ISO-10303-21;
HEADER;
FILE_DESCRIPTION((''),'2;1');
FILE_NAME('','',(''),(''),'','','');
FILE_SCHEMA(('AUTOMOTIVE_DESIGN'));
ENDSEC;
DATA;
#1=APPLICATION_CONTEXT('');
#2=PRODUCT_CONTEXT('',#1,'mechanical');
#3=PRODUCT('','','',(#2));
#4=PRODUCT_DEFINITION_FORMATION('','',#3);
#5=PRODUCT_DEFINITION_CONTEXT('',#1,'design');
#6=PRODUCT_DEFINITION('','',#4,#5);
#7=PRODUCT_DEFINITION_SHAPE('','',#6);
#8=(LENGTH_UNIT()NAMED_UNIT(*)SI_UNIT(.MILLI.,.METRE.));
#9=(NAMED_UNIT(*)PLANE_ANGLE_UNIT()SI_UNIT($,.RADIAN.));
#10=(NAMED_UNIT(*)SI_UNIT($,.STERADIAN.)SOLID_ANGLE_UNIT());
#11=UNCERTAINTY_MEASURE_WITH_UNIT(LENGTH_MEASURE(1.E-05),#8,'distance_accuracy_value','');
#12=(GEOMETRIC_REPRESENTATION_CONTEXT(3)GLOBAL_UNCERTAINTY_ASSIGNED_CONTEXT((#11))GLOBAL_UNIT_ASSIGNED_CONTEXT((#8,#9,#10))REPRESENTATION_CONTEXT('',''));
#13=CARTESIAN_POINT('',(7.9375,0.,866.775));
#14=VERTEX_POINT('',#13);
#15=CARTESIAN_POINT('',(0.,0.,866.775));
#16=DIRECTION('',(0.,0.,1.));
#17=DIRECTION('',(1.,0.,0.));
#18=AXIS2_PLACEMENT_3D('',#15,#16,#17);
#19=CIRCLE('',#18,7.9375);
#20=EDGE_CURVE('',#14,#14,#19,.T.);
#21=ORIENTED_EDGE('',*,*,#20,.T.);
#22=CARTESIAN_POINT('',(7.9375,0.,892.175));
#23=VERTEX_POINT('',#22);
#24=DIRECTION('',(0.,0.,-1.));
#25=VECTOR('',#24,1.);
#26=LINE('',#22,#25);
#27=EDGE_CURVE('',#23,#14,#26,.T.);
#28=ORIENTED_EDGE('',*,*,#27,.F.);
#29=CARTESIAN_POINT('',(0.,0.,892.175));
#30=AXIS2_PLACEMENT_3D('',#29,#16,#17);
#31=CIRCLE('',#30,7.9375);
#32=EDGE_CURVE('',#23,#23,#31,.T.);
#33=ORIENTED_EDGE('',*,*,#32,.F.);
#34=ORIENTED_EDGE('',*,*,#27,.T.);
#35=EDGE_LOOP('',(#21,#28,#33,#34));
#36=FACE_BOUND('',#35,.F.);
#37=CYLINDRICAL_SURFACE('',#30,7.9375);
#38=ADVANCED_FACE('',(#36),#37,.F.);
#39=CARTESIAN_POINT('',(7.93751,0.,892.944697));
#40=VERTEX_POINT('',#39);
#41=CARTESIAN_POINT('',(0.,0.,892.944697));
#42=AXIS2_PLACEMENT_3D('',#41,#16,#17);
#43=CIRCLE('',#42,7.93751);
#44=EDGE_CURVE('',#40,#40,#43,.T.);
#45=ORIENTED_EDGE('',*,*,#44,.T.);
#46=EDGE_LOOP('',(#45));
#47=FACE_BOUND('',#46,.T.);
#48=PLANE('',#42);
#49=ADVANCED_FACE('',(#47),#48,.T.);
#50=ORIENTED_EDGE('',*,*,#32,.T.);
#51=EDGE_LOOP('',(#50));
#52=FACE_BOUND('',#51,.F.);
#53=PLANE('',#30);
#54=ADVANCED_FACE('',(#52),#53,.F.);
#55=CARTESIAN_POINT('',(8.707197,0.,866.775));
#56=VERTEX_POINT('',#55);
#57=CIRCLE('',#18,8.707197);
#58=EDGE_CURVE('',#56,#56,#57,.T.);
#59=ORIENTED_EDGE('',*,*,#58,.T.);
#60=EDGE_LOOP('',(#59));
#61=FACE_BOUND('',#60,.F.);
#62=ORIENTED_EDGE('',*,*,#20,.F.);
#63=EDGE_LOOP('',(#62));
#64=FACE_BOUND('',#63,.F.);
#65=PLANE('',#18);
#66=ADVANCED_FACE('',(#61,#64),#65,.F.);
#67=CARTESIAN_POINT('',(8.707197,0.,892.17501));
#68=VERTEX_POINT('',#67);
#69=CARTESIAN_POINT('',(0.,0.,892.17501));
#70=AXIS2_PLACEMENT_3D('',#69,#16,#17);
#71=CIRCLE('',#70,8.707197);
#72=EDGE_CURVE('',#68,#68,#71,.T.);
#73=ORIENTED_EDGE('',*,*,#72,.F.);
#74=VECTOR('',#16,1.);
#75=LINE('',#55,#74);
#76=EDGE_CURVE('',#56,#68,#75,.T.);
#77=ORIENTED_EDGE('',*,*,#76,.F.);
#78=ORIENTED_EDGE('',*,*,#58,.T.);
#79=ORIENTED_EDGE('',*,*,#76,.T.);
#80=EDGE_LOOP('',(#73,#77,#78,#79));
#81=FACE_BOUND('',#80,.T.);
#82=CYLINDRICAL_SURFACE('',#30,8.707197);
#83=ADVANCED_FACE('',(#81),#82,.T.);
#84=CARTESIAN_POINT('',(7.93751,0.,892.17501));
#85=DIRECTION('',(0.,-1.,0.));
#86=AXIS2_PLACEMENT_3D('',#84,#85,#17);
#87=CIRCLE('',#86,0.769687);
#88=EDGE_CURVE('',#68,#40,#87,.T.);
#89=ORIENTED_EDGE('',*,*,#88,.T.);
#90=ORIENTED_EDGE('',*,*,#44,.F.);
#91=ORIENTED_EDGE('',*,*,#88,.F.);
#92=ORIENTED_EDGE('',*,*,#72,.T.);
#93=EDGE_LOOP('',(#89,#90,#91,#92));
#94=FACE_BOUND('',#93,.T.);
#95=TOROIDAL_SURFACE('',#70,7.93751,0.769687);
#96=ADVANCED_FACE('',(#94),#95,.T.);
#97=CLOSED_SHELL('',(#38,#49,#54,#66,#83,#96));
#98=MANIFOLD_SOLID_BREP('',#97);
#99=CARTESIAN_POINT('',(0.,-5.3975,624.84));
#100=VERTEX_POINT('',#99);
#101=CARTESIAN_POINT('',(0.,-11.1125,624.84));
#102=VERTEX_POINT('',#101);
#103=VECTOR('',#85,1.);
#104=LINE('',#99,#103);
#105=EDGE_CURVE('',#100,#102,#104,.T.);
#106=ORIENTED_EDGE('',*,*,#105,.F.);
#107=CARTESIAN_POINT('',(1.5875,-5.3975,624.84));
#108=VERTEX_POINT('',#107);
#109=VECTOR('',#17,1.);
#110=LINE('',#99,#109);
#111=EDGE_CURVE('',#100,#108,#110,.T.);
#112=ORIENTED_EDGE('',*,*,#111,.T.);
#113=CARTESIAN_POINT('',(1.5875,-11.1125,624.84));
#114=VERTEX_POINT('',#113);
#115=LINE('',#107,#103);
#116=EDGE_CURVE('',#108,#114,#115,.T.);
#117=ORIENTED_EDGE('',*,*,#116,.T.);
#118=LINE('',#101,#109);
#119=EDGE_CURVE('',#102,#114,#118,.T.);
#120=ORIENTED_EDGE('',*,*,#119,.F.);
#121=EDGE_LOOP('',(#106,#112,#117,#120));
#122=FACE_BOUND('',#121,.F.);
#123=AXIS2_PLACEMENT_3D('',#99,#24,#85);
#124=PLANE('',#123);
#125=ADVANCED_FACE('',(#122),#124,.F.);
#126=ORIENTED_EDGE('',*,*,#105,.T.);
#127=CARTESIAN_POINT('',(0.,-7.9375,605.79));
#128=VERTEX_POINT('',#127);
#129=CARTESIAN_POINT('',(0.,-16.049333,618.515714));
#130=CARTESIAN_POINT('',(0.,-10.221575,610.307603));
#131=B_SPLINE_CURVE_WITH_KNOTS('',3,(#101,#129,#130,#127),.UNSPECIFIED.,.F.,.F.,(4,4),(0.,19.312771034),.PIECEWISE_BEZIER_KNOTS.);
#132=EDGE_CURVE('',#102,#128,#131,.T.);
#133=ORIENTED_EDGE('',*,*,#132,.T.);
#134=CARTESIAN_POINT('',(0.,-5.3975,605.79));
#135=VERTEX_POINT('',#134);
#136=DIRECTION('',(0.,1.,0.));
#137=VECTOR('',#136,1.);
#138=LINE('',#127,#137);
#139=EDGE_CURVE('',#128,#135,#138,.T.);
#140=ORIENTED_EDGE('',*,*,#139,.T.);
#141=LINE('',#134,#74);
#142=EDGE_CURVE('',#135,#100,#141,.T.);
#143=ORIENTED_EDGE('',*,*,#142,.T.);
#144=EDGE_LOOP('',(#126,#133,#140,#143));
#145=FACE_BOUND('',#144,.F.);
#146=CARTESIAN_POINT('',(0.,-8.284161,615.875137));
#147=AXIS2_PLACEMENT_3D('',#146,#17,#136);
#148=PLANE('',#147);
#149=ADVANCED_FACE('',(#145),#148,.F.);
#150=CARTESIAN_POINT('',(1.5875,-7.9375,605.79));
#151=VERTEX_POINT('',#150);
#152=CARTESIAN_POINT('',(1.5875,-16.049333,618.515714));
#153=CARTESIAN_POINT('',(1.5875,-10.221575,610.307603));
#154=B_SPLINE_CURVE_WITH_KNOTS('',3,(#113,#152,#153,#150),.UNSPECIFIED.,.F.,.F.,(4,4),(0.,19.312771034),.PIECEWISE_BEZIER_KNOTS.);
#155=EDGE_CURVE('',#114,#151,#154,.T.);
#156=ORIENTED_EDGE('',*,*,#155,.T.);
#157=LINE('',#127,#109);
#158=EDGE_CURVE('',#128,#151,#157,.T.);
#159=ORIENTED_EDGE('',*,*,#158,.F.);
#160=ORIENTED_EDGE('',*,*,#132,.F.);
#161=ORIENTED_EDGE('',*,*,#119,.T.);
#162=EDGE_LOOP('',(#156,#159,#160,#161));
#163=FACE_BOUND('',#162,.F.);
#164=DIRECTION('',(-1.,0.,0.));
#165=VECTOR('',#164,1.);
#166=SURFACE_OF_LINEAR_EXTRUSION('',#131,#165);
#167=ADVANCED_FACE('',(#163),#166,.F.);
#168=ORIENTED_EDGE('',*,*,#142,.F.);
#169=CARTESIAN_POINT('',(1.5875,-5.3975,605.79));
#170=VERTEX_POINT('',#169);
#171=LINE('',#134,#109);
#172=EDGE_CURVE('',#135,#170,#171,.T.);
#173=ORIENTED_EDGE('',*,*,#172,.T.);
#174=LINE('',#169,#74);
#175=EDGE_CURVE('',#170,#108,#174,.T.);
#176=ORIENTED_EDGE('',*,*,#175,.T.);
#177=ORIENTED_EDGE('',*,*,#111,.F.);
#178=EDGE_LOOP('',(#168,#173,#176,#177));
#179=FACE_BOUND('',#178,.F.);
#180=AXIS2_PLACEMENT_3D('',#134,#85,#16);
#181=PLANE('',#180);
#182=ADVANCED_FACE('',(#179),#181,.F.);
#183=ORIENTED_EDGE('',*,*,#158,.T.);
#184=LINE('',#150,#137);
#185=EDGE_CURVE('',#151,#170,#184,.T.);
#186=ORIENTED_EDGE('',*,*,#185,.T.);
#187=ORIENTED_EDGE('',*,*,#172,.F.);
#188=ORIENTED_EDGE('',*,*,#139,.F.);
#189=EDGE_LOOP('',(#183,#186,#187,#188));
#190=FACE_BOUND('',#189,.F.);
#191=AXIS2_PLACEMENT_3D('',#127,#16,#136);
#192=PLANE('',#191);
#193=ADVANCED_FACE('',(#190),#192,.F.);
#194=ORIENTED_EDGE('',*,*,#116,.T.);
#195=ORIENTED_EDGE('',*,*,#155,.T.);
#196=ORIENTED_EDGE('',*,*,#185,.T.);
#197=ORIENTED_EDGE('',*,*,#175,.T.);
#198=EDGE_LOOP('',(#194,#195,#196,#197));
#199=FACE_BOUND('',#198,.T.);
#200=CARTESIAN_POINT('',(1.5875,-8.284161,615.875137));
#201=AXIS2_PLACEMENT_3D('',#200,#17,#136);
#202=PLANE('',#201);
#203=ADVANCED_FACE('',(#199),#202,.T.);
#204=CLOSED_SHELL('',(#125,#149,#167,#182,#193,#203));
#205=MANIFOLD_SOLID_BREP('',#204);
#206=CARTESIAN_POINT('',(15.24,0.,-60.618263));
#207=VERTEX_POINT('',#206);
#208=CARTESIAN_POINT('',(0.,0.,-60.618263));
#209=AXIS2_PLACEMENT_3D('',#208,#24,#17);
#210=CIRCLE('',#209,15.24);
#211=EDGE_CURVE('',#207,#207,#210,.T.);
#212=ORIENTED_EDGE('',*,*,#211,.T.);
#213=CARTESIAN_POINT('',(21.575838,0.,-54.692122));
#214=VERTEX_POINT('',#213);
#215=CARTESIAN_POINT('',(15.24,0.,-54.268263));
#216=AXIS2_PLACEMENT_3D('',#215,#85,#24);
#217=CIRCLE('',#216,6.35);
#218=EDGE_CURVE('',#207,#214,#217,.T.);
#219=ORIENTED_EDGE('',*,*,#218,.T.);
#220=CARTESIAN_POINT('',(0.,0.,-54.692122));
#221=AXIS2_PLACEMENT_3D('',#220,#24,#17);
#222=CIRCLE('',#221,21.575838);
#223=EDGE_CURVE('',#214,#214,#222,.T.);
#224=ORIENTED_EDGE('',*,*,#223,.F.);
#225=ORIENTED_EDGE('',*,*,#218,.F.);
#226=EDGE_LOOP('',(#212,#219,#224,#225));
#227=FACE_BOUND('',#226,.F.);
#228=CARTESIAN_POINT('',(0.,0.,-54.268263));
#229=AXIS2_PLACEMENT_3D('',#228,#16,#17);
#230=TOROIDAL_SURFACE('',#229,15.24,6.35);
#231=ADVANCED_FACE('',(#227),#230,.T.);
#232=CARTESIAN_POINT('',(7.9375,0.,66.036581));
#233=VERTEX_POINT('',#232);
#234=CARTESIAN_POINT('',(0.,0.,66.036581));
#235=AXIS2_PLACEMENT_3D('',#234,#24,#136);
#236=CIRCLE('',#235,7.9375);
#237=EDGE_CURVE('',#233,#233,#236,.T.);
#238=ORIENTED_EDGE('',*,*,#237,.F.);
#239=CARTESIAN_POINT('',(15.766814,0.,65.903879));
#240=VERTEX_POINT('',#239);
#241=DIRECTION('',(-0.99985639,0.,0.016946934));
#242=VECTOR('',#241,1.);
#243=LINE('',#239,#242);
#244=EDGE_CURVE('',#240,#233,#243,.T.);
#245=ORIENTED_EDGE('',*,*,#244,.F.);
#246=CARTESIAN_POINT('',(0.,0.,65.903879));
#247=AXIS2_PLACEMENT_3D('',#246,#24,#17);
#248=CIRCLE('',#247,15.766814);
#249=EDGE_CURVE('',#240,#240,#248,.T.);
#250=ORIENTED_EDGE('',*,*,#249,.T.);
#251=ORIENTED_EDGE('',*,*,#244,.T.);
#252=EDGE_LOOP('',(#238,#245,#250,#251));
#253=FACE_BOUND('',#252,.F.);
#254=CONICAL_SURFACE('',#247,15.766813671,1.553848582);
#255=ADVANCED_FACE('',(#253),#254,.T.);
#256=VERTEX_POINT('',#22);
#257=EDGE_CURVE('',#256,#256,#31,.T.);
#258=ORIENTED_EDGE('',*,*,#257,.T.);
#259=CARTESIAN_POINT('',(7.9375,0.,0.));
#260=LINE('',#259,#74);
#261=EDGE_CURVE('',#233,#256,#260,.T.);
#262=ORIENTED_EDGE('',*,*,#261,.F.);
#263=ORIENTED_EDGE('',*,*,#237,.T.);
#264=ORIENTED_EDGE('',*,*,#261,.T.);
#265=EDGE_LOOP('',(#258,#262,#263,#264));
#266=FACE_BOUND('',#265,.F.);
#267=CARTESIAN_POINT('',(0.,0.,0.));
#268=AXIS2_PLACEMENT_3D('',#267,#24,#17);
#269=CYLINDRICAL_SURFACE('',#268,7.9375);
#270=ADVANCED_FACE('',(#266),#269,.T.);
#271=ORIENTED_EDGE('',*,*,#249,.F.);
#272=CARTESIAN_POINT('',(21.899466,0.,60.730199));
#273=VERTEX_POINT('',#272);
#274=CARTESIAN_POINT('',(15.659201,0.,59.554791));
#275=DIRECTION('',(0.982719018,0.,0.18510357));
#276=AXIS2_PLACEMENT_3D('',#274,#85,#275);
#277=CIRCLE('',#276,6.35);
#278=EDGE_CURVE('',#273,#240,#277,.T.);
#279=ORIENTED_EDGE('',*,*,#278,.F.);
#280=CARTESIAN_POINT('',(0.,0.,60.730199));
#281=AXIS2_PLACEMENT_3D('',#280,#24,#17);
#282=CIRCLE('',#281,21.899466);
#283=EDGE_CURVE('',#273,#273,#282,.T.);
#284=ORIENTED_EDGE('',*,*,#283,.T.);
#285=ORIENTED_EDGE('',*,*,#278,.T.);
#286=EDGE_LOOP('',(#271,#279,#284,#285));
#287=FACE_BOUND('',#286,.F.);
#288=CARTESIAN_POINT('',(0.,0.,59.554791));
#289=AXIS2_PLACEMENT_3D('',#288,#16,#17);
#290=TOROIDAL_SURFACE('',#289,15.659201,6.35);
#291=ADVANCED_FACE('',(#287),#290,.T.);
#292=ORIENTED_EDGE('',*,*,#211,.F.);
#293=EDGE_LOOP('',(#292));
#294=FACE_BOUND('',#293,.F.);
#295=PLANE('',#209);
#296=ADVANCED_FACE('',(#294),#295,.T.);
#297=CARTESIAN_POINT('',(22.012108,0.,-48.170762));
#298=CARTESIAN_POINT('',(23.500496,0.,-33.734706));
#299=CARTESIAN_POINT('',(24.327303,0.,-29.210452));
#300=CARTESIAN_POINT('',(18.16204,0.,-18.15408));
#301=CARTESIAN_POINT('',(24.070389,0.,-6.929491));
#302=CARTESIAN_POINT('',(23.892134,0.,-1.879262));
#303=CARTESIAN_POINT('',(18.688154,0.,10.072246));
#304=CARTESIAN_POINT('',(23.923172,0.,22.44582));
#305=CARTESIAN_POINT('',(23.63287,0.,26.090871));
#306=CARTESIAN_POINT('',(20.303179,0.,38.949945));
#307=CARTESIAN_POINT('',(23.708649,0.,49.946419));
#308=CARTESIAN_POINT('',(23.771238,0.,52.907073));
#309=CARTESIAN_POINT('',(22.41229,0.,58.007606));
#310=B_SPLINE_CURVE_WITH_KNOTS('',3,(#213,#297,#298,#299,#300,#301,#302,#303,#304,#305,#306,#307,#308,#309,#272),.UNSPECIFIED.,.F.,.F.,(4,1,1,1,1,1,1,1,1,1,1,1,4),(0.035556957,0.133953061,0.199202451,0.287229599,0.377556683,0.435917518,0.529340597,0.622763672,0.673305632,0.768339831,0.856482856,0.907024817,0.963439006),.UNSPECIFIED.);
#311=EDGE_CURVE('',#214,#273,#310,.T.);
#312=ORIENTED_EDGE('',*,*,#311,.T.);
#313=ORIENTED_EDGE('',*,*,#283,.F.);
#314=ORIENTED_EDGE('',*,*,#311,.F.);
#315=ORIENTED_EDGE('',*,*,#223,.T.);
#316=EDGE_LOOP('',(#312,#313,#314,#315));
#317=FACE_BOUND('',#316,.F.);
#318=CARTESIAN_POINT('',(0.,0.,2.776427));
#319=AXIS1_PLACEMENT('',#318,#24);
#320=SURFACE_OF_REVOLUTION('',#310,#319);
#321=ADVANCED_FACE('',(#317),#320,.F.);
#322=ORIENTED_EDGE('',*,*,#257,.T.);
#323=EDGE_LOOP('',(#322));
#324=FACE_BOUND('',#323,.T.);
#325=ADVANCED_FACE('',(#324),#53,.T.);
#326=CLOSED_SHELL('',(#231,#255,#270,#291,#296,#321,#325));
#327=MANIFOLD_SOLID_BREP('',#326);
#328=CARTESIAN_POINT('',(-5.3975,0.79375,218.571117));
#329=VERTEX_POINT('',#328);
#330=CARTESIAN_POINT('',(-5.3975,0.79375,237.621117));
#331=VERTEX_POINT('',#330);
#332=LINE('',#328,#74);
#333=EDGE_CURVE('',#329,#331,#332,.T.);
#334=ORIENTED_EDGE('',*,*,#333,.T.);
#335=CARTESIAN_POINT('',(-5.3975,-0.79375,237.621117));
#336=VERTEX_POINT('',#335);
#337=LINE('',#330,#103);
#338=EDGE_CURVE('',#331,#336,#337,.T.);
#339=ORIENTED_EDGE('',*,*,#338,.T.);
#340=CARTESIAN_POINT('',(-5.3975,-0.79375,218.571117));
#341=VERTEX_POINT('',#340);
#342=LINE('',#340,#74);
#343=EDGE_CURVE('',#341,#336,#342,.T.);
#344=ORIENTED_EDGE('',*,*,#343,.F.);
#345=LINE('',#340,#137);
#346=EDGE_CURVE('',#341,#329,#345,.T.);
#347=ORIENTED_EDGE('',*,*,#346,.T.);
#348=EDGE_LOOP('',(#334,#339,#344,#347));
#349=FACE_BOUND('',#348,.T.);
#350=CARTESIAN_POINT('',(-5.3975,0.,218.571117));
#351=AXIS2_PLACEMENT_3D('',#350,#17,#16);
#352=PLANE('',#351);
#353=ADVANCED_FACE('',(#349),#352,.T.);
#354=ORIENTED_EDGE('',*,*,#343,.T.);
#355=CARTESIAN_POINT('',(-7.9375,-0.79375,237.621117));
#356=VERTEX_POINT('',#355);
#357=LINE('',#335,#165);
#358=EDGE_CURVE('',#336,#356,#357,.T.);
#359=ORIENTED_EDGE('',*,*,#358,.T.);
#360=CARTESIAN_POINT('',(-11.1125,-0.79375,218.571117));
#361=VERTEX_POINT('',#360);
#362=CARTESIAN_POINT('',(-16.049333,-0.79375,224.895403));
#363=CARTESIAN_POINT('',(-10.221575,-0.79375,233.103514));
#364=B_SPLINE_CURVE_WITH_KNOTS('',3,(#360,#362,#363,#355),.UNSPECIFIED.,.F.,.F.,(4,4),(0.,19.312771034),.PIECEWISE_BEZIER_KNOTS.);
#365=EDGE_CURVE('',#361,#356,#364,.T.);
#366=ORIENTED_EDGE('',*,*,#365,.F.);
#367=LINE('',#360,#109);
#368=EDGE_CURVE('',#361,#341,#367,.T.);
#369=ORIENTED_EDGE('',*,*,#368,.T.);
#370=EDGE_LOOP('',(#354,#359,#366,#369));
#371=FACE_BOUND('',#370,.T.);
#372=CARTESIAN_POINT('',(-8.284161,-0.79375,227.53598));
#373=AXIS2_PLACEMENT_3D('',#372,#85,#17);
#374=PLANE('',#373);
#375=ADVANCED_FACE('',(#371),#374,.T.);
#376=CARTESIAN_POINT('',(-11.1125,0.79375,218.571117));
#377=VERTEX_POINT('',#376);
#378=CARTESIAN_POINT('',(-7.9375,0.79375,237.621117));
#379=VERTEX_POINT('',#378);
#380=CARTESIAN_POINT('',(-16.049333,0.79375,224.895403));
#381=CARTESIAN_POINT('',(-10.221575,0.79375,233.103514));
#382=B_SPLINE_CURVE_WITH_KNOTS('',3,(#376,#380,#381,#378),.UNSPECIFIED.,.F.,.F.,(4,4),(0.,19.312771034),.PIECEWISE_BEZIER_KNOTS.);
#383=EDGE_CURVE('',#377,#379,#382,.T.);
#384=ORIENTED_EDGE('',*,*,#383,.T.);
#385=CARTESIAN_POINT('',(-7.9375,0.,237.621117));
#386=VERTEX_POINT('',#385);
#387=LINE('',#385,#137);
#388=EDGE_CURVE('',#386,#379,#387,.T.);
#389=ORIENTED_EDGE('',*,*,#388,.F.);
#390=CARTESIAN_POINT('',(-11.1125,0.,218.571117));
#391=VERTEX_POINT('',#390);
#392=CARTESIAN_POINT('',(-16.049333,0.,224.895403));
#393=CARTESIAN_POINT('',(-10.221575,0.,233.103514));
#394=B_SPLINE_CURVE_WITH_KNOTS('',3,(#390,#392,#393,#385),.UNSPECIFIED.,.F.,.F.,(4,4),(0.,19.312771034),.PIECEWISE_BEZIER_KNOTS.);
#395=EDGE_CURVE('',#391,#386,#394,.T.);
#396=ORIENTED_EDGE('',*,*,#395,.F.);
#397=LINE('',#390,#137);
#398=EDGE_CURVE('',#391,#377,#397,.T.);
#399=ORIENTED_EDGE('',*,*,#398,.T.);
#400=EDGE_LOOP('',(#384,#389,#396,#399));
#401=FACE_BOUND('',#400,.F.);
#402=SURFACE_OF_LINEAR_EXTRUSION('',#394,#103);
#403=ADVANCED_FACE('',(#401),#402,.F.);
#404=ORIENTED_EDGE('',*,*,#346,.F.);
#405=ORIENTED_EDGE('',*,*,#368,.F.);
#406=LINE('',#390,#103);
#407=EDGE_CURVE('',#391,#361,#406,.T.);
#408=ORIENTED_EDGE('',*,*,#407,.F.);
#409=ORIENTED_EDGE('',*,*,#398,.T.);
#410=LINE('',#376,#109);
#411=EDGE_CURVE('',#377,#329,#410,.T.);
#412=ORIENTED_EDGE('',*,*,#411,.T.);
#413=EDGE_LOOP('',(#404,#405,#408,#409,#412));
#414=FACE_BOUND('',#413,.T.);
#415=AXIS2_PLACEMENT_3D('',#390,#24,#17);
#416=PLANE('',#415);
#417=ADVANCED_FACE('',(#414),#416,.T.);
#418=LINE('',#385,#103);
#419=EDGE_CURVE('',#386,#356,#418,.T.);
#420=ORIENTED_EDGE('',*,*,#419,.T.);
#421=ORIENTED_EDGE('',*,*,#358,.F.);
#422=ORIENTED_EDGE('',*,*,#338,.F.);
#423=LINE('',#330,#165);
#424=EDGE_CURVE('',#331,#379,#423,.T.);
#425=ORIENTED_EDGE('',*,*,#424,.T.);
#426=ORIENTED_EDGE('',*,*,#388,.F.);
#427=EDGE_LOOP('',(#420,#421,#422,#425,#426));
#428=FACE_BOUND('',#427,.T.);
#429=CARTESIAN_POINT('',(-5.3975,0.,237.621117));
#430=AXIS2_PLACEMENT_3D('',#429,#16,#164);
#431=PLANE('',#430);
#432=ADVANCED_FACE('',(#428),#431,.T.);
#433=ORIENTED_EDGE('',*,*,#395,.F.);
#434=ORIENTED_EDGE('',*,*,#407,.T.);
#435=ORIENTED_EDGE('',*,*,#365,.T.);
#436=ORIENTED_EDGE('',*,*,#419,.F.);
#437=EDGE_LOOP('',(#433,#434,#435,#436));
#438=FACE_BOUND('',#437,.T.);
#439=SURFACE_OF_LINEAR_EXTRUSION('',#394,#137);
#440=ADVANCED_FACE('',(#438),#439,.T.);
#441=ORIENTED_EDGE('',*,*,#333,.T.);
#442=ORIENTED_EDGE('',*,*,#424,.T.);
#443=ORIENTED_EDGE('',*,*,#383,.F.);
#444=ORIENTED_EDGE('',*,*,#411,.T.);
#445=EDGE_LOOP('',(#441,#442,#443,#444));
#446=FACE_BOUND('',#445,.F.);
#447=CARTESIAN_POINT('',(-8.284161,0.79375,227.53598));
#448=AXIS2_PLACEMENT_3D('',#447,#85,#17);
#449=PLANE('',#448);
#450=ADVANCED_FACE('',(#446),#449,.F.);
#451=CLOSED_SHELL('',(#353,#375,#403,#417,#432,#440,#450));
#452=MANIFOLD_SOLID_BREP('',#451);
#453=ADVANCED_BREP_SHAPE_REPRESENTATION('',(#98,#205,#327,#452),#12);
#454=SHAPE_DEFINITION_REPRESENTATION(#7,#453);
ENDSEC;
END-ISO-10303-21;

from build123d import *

# Parameters (mm, degrees)
F2_R      = 7.9375
F3_DEPTH  = 892.175
F5_DEPTH  = 0.79375
F7_DEPTH  = 1.5875
F8_R      = 8.7071969697
F8_R_2    = 7.9375
F9_DEPTH  = 0.7696969697
F10_DEPTH = 25.4
F11_R     = 0.769687


# Not quite as in the source:
# - a fillet or chamfer is up to 0.001 mm smaller than in the source, because OpenCascade refuses the exact size


with BuildPart() as f1:
    # F0 (on Front) → F1 (revolve)
    with BuildSketch(Plane.XZ):
        with BuildLine():
            Line((15.7668136708, 65.9038792952), (0, 66.1711168233))
            Line((0, 66.1711168233), (0, -60.618262738))
            Line((0, -60.618262738), (15.24, -60.618262738))
            ThreePointArc((15.24, -60.618262738), (19.5776834861, -58.9058269666), (21.5758380378, -54.6921216277))
            add(Edge.make_bspline(
                [(21.5758380378, -54.6921216277), (22.0121080476, -48.1707623027), (23.5004956481, -33.7347059012), (24.3273034079, -29.2104516541), (18.1620396435, -18.1540798034), (24.0703888205, -6.9294910192), (23.8921343024, -1.879261787), (18.6881535155, 10.0722464342), (23.9231717284, 22.4458200693), (23.6328702389, 26.0908705285), (20.3031790042, 38.9499451611), (23.7086494403, 49.9464189693), (23.7712381176, 52.9070726894), (22.4122901354, 58.0076061581), (21.8994664046, 60.7301988849)],
                knots=[0.0355569573, 0.0355569573, 0.0355569573, 0.0355569573, 0.1339530606, 0.1992024509, 0.2872295991, 0.3775566826, 0.4359175184, 0.5293405972, 0.6227636718, 0.6733056322, 0.7683398311, 0.8564828563, 0.9070248167, 0.9634390062, 0.9634390062, 0.9634390062, 0.9634390062], degree=3))
            ThreePointArc((21.8994664046, 60.7301988849), (19.7537865223, 64.4083328563), (15.7668136708, 65.9038792952))
        make_face()
    revolve(axis=Axis((0, 0, 2.7764270426), (0, 0, -1)))

    # F2 (on Top) → F3 (join)
    with BuildSketch(Plane.XY):
        Circle(F2_R)
    extrude(amount=F3_DEPTH)


with BuildPart() as f5:
    # F4 (on Front) → F5 (new body, symmetric)
    with BuildSketch(Plane.XZ):
        with BuildLine():
            Line((-7.9375, 218.5711168233), (-5.3975, 218.5711168233))
            Line((-5.3975, 218.5711168233), (-5.3975, 237.6211168233))
            Line((-5.3975, 237.6211168233), (-7.9375, 237.6211168233))
            add(Edge.make_bspline(
                [(-11.1125, 218.5711168233), (-16.0493329167, 224.8954027891), (-10.2215753868, 233.1035137177), (-7.9375, 237.6211168233)],
                knots=[0, 0, 0, 0, 19.3127710337, 19.3127710337, 19.3127710337, 19.3127710337], degree=3))
            Line((-11.1125, 218.5711168233), (-7.9375, 218.5711168233))
        make_face()
    extrude(amount=F5_DEPTH, both=True)


with BuildPart() as f7:
    # F6 (on Right) → F7 (new body)
    with BuildSketch(Plane.YZ):
        with BuildLine():
            Line((-5.3975, 605.79), (-5.3975, 624.84))
            Line((-5.3975, 624.84), (-7.9375, 624.84))
            Line((-7.9375, 624.84), (-11.1125, 624.84))
            add(Edge.make_bspline(
                [(-11.1125, 624.84), (-16.0493329167, 618.5157140341), (-10.2215753868, 610.3076031056), (-7.9375, 605.79)],
                knots=[0, 0, 0, 0, 19.3127710337, 19.3127710337, 19.3127710337, 19.3127710337], degree=3))
            Line((-7.9375, 605.79), (-5.3975, 605.79))
        make_face()
    extrude(amount=F7_DEPTH)


with BuildPart() as f9:
    # F8 (on face) → F9 (new body)
    with BuildSketch(Plane.XY.offset(892.175)):
        Circle(F8_R)
        Circle(F8_R_2, mode=Mode.SUBTRACT)
        Circle(F8_R_2)
    extrude(amount=F9_DEPTH)

    # F8 (on face) → F10 (join)
    with BuildSketch(Plane.XY.offset(892.175)):
        Circle(F8_R)
        Circle(F8_R_2, mode=Mode.SUBTRACT)
    extrude(amount=-F10_DEPTH)

    # F11 (radius 0.7696969697 in the source; OpenCascade refuses exactly that, so slightly less here)
    f11_edges = [f9.edges().sort_by_distance(p)[0] for p in [
        (-8.707197, 0, 892.944697),
    ]]
    fillet(f11_edges, radius=F11_R)


solid = Compound([f1.part, f5.part, f7.part, f9.part])
